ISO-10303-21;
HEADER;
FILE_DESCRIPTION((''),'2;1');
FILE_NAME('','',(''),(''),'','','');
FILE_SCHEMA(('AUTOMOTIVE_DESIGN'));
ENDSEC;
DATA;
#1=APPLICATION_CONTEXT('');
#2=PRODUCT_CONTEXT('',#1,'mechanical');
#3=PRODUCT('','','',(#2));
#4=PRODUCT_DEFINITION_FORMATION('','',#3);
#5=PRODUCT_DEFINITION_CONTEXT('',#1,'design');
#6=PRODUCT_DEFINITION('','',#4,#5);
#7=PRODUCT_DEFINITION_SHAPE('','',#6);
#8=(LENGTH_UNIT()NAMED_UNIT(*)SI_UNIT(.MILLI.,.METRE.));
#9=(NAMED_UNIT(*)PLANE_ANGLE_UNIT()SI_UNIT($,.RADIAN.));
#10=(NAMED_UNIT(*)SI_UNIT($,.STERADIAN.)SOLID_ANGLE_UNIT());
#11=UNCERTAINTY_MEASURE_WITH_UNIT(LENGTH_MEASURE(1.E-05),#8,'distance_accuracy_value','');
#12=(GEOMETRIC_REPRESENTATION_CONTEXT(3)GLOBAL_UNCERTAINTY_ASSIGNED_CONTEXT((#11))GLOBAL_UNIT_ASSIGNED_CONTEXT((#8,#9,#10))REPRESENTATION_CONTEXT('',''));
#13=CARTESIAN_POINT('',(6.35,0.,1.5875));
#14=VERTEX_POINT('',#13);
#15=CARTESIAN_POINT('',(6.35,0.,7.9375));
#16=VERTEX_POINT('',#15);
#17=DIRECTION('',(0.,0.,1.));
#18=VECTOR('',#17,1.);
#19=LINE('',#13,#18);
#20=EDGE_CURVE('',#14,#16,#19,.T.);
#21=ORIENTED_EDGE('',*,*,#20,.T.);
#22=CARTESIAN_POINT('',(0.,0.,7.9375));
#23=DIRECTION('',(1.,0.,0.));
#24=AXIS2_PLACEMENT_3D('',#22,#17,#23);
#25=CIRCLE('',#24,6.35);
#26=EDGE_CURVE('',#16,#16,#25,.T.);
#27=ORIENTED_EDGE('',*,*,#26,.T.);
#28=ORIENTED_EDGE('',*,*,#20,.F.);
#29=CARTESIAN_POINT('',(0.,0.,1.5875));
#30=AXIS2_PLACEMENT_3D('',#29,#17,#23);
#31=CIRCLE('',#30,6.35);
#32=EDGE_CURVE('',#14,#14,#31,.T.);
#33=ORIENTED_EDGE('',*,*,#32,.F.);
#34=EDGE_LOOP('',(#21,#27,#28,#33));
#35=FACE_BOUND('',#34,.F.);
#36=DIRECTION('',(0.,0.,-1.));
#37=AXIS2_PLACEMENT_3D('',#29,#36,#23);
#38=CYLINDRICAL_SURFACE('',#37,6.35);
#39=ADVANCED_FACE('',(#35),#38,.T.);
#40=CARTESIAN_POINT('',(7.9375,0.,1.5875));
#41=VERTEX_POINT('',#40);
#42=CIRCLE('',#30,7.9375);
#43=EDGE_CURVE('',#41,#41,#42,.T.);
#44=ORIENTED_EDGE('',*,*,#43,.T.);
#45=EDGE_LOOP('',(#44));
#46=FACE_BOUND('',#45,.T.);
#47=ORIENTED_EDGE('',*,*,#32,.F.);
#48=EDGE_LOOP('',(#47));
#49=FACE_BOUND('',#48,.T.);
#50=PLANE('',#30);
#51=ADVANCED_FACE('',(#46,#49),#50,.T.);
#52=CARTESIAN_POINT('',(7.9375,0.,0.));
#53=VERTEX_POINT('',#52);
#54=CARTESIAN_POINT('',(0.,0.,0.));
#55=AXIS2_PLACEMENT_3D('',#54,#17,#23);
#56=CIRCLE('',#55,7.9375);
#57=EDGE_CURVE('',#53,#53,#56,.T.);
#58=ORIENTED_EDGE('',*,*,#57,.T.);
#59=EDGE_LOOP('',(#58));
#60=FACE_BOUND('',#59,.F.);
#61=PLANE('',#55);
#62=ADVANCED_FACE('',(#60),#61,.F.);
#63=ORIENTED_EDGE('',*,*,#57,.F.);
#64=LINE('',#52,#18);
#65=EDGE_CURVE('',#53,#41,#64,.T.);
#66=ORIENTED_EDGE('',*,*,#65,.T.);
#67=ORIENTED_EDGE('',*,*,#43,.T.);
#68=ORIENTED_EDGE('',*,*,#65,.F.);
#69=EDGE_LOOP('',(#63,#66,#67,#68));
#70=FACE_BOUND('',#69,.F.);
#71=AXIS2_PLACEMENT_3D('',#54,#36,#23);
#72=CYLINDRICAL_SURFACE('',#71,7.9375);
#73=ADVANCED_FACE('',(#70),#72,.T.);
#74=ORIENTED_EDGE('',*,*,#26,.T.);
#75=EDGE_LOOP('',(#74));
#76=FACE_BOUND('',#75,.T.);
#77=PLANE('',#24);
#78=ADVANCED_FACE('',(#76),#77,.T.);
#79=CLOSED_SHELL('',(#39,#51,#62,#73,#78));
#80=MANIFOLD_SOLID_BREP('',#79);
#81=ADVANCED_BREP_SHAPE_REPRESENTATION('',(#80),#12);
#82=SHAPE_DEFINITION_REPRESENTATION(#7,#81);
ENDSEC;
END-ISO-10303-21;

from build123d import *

# Parameters (mm, degrees)
F0_R     = 7.9375
F1_DEPTH = 1.5875
F2_R     = 6.35
F3_DEPTH = 6.35


# Not quite as in the source:
# - a length typed as a fraction of an inch, garbled in the dataset ("3 / 203.2 mm" for 3/8 in), is restored


with BuildPart() as f1:
    # F0 (on Top) → F1 (new body)
    with BuildSketch(Plane.XY):
        Circle(F0_R)
    extrude(amount=F1_DEPTH)

    # F2 (on face) → F3 (join)
    with BuildSketch(Plane.XY.offset(1.5875)):
        Circle(F2_R)
    extrude(amount=F3_DEPTH)


solid = f1.part
